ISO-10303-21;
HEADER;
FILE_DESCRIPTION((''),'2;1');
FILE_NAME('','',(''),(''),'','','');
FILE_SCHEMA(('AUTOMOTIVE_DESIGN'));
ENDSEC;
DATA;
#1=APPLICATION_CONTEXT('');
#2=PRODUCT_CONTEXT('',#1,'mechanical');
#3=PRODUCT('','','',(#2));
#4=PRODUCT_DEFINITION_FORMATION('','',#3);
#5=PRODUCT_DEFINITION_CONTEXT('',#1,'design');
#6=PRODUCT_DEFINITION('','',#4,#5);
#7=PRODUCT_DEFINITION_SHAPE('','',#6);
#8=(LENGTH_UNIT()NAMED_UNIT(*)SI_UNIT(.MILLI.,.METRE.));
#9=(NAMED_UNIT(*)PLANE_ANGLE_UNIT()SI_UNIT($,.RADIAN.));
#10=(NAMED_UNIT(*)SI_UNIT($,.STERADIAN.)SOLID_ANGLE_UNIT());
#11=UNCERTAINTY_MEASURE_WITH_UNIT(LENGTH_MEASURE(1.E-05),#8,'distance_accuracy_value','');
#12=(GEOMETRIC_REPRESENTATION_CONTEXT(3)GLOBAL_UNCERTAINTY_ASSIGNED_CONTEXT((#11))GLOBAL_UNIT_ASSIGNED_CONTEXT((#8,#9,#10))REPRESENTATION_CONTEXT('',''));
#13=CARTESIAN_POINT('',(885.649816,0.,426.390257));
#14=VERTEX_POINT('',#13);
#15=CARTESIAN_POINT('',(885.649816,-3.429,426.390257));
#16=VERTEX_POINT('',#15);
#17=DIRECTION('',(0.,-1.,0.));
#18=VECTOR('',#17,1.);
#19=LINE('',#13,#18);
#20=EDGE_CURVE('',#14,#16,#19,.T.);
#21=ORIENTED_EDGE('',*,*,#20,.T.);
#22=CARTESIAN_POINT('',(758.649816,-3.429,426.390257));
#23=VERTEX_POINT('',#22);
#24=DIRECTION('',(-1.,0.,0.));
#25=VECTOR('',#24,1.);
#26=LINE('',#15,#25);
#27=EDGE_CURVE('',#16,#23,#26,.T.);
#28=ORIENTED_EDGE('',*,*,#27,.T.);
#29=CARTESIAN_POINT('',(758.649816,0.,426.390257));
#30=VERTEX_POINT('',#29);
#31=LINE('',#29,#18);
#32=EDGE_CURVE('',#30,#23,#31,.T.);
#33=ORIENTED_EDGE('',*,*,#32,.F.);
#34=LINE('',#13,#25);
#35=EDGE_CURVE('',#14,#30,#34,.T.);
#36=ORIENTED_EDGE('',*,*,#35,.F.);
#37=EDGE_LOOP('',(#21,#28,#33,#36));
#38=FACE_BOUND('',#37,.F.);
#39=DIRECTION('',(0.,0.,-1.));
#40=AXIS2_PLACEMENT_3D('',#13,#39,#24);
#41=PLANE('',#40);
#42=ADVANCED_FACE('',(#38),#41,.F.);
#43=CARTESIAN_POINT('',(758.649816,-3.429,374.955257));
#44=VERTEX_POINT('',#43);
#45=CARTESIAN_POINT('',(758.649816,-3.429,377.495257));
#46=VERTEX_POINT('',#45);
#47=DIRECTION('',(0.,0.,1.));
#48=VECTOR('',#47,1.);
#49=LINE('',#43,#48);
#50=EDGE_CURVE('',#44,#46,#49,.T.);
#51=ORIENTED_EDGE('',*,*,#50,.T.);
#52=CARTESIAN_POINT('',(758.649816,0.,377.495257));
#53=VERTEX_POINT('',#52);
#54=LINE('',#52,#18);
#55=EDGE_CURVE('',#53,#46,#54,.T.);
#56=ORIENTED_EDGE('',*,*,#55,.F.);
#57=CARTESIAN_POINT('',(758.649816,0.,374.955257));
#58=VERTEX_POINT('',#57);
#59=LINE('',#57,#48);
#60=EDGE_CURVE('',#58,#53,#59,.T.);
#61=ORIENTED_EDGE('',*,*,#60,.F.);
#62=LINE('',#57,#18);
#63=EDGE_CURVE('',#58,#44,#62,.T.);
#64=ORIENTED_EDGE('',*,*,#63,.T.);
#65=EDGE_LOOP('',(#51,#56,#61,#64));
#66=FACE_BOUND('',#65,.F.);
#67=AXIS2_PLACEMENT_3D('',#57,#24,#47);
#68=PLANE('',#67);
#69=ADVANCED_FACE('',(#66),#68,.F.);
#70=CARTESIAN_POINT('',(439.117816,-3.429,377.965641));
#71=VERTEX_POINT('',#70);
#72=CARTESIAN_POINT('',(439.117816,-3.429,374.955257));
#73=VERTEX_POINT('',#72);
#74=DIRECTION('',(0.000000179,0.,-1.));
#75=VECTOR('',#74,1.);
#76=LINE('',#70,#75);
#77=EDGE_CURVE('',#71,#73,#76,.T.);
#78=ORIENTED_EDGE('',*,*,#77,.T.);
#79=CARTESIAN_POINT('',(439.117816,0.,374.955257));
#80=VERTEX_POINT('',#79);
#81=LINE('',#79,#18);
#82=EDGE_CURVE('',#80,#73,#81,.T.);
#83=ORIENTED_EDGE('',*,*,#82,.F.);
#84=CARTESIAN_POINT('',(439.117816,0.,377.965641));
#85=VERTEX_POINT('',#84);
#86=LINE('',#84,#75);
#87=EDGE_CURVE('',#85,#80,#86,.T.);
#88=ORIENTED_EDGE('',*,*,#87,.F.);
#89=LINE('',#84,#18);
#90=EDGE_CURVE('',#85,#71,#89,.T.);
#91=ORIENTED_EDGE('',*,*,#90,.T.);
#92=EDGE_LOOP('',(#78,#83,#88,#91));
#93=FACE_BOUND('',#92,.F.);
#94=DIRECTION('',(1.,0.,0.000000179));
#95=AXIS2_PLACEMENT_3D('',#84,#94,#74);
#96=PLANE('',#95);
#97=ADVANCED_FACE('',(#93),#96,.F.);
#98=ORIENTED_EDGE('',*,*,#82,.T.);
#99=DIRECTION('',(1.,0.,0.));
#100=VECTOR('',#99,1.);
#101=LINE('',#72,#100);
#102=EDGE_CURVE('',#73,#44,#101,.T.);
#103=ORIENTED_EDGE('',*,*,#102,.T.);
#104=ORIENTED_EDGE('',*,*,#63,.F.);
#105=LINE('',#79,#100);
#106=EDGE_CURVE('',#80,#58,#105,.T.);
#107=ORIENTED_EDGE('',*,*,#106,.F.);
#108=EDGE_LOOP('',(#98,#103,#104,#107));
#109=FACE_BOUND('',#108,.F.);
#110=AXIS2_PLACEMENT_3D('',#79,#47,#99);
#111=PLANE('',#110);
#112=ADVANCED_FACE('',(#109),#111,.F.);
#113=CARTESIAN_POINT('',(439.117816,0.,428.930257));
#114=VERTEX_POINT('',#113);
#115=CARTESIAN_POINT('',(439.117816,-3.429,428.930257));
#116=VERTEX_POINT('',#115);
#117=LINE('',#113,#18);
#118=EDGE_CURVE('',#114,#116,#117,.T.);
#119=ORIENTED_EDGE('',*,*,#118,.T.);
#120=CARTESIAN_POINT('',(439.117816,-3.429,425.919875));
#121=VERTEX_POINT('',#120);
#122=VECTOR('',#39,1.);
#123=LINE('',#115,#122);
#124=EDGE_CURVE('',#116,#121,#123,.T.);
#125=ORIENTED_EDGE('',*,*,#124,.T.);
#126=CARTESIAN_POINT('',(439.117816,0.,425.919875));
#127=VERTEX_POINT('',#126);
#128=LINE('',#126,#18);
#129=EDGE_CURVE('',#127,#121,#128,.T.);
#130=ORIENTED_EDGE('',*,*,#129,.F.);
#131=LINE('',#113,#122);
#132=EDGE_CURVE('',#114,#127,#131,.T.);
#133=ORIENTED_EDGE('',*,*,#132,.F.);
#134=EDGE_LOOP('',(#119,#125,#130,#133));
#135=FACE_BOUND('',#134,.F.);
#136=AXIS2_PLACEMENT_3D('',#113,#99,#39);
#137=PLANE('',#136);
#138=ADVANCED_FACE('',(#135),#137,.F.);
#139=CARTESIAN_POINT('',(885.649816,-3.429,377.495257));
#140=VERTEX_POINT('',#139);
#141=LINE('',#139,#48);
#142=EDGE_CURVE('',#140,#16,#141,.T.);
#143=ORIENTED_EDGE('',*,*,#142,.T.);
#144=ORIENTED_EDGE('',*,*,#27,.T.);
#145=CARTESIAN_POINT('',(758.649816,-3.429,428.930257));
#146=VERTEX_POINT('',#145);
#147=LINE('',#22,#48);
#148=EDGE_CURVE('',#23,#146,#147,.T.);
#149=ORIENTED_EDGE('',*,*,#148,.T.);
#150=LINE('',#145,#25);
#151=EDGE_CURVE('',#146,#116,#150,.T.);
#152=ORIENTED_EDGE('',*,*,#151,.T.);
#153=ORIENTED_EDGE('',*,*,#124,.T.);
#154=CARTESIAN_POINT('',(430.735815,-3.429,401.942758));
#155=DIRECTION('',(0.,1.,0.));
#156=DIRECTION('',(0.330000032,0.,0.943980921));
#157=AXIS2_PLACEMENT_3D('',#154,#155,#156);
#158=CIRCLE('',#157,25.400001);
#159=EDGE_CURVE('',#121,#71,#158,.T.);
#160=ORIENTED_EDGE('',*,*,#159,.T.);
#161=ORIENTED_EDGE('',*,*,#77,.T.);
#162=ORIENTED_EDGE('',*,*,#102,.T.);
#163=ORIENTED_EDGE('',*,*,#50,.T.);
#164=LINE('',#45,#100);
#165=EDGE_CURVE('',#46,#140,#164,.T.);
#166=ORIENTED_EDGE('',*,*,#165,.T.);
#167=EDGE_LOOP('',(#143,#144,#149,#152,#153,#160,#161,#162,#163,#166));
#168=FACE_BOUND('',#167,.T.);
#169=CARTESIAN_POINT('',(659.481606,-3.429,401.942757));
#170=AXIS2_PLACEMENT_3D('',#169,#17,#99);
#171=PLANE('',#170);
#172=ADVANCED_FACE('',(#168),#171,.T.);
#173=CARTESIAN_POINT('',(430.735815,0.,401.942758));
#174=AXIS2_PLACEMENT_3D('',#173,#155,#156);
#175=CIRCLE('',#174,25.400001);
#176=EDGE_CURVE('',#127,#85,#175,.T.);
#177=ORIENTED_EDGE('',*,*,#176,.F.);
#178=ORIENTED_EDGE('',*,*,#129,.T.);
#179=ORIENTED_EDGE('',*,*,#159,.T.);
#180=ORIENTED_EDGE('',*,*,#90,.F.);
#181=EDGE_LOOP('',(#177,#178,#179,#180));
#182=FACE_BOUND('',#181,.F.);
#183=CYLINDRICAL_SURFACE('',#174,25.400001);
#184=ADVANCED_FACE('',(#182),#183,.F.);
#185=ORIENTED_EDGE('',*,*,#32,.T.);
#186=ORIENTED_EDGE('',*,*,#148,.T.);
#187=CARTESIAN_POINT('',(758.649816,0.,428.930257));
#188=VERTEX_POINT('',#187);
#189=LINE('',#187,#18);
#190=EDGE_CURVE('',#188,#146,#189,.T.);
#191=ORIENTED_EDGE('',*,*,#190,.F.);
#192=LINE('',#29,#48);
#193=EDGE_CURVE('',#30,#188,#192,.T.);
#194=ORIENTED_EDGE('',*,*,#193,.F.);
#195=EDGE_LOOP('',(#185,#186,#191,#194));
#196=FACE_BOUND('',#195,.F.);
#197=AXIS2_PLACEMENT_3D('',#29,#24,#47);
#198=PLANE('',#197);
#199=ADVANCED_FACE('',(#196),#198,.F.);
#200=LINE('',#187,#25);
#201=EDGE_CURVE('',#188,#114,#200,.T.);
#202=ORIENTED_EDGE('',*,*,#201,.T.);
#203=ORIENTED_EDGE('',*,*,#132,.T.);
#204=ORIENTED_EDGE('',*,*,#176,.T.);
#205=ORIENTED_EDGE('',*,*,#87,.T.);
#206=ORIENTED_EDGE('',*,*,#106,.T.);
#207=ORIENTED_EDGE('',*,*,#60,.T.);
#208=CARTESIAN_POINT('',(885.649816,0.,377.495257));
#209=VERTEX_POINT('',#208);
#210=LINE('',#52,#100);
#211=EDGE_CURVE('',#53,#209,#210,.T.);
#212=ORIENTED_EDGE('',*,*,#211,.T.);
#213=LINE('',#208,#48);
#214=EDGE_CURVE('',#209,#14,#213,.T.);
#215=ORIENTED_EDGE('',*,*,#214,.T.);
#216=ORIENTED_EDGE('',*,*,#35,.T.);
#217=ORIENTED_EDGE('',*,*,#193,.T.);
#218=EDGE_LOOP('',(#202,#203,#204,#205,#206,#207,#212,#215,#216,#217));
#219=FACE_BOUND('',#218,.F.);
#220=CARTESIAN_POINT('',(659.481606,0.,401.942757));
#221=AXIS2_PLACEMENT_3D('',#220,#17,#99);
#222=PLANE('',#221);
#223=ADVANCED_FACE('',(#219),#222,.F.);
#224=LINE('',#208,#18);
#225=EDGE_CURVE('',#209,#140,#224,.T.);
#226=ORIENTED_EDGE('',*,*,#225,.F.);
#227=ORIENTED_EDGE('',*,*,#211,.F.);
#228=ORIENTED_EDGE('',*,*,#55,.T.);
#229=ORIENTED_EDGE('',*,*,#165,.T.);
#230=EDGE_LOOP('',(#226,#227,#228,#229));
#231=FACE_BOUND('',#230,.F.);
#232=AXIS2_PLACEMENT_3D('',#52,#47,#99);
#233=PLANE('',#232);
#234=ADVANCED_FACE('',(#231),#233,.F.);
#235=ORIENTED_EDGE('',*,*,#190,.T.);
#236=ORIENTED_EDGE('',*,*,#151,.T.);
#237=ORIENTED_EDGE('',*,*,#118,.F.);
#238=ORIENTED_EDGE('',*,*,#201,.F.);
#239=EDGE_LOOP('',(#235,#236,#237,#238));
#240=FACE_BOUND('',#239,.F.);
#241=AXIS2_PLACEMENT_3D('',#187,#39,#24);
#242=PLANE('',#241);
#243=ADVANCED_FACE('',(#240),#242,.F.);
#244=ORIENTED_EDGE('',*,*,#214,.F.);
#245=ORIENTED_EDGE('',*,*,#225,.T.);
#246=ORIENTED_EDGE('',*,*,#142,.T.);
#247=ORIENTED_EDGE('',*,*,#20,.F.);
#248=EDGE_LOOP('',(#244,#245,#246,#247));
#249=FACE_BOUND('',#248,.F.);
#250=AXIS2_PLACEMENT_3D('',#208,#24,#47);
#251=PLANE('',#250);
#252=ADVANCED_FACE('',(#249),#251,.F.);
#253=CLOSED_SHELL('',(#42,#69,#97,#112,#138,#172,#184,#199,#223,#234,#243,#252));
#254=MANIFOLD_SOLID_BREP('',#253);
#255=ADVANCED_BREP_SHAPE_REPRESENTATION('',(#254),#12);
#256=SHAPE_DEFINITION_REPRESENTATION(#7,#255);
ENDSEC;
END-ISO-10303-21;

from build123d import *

# Parameters (mm, degrees)
F1_DEPTH = 3.429


# Not quite as in the source:
# - ends of sketch curves that miss each other by under 0.0002 mm in the source are joined


with BuildPart() as f1:
    # F0 (on Front) → F1 (new body)
    with BuildSketch(Plane.XZ):
        with BuildLine():
            Line((758.6498162, 426.3902572), (758.6498162, 428.9302572))
            Line((758.6498162, 428.9302572), (439.1178162, 428.9302572))
            Line((439.1178162, 428.9302572), (439.1178162, 425.9198746))
            ThreePointArc((439.1178162, 425.9198746), (456.1358162, 401.9427572), (439.117815662, 377.9656413389))
            Line((439.117815662, 377.9656413389), (439.1178162, 374.9552572))
            Line((439.1178162, 374.9552572), (758.6498162, 374.9552572))
            Line((758.6498162, 374.9552572), (758.6498162, 377.4952572))
            Line((758.6498162, 377.4952572), (885.6498162, 377.4952572))
            Line((885.6498162, 377.4952572), (885.6498162, 426.3902572))
            Line((885.6498162, 426.3902572), (758.6498162, 426.3902572))
        make_face()
    extrude(amount=F1_DEPTH)


solid = f1.part
